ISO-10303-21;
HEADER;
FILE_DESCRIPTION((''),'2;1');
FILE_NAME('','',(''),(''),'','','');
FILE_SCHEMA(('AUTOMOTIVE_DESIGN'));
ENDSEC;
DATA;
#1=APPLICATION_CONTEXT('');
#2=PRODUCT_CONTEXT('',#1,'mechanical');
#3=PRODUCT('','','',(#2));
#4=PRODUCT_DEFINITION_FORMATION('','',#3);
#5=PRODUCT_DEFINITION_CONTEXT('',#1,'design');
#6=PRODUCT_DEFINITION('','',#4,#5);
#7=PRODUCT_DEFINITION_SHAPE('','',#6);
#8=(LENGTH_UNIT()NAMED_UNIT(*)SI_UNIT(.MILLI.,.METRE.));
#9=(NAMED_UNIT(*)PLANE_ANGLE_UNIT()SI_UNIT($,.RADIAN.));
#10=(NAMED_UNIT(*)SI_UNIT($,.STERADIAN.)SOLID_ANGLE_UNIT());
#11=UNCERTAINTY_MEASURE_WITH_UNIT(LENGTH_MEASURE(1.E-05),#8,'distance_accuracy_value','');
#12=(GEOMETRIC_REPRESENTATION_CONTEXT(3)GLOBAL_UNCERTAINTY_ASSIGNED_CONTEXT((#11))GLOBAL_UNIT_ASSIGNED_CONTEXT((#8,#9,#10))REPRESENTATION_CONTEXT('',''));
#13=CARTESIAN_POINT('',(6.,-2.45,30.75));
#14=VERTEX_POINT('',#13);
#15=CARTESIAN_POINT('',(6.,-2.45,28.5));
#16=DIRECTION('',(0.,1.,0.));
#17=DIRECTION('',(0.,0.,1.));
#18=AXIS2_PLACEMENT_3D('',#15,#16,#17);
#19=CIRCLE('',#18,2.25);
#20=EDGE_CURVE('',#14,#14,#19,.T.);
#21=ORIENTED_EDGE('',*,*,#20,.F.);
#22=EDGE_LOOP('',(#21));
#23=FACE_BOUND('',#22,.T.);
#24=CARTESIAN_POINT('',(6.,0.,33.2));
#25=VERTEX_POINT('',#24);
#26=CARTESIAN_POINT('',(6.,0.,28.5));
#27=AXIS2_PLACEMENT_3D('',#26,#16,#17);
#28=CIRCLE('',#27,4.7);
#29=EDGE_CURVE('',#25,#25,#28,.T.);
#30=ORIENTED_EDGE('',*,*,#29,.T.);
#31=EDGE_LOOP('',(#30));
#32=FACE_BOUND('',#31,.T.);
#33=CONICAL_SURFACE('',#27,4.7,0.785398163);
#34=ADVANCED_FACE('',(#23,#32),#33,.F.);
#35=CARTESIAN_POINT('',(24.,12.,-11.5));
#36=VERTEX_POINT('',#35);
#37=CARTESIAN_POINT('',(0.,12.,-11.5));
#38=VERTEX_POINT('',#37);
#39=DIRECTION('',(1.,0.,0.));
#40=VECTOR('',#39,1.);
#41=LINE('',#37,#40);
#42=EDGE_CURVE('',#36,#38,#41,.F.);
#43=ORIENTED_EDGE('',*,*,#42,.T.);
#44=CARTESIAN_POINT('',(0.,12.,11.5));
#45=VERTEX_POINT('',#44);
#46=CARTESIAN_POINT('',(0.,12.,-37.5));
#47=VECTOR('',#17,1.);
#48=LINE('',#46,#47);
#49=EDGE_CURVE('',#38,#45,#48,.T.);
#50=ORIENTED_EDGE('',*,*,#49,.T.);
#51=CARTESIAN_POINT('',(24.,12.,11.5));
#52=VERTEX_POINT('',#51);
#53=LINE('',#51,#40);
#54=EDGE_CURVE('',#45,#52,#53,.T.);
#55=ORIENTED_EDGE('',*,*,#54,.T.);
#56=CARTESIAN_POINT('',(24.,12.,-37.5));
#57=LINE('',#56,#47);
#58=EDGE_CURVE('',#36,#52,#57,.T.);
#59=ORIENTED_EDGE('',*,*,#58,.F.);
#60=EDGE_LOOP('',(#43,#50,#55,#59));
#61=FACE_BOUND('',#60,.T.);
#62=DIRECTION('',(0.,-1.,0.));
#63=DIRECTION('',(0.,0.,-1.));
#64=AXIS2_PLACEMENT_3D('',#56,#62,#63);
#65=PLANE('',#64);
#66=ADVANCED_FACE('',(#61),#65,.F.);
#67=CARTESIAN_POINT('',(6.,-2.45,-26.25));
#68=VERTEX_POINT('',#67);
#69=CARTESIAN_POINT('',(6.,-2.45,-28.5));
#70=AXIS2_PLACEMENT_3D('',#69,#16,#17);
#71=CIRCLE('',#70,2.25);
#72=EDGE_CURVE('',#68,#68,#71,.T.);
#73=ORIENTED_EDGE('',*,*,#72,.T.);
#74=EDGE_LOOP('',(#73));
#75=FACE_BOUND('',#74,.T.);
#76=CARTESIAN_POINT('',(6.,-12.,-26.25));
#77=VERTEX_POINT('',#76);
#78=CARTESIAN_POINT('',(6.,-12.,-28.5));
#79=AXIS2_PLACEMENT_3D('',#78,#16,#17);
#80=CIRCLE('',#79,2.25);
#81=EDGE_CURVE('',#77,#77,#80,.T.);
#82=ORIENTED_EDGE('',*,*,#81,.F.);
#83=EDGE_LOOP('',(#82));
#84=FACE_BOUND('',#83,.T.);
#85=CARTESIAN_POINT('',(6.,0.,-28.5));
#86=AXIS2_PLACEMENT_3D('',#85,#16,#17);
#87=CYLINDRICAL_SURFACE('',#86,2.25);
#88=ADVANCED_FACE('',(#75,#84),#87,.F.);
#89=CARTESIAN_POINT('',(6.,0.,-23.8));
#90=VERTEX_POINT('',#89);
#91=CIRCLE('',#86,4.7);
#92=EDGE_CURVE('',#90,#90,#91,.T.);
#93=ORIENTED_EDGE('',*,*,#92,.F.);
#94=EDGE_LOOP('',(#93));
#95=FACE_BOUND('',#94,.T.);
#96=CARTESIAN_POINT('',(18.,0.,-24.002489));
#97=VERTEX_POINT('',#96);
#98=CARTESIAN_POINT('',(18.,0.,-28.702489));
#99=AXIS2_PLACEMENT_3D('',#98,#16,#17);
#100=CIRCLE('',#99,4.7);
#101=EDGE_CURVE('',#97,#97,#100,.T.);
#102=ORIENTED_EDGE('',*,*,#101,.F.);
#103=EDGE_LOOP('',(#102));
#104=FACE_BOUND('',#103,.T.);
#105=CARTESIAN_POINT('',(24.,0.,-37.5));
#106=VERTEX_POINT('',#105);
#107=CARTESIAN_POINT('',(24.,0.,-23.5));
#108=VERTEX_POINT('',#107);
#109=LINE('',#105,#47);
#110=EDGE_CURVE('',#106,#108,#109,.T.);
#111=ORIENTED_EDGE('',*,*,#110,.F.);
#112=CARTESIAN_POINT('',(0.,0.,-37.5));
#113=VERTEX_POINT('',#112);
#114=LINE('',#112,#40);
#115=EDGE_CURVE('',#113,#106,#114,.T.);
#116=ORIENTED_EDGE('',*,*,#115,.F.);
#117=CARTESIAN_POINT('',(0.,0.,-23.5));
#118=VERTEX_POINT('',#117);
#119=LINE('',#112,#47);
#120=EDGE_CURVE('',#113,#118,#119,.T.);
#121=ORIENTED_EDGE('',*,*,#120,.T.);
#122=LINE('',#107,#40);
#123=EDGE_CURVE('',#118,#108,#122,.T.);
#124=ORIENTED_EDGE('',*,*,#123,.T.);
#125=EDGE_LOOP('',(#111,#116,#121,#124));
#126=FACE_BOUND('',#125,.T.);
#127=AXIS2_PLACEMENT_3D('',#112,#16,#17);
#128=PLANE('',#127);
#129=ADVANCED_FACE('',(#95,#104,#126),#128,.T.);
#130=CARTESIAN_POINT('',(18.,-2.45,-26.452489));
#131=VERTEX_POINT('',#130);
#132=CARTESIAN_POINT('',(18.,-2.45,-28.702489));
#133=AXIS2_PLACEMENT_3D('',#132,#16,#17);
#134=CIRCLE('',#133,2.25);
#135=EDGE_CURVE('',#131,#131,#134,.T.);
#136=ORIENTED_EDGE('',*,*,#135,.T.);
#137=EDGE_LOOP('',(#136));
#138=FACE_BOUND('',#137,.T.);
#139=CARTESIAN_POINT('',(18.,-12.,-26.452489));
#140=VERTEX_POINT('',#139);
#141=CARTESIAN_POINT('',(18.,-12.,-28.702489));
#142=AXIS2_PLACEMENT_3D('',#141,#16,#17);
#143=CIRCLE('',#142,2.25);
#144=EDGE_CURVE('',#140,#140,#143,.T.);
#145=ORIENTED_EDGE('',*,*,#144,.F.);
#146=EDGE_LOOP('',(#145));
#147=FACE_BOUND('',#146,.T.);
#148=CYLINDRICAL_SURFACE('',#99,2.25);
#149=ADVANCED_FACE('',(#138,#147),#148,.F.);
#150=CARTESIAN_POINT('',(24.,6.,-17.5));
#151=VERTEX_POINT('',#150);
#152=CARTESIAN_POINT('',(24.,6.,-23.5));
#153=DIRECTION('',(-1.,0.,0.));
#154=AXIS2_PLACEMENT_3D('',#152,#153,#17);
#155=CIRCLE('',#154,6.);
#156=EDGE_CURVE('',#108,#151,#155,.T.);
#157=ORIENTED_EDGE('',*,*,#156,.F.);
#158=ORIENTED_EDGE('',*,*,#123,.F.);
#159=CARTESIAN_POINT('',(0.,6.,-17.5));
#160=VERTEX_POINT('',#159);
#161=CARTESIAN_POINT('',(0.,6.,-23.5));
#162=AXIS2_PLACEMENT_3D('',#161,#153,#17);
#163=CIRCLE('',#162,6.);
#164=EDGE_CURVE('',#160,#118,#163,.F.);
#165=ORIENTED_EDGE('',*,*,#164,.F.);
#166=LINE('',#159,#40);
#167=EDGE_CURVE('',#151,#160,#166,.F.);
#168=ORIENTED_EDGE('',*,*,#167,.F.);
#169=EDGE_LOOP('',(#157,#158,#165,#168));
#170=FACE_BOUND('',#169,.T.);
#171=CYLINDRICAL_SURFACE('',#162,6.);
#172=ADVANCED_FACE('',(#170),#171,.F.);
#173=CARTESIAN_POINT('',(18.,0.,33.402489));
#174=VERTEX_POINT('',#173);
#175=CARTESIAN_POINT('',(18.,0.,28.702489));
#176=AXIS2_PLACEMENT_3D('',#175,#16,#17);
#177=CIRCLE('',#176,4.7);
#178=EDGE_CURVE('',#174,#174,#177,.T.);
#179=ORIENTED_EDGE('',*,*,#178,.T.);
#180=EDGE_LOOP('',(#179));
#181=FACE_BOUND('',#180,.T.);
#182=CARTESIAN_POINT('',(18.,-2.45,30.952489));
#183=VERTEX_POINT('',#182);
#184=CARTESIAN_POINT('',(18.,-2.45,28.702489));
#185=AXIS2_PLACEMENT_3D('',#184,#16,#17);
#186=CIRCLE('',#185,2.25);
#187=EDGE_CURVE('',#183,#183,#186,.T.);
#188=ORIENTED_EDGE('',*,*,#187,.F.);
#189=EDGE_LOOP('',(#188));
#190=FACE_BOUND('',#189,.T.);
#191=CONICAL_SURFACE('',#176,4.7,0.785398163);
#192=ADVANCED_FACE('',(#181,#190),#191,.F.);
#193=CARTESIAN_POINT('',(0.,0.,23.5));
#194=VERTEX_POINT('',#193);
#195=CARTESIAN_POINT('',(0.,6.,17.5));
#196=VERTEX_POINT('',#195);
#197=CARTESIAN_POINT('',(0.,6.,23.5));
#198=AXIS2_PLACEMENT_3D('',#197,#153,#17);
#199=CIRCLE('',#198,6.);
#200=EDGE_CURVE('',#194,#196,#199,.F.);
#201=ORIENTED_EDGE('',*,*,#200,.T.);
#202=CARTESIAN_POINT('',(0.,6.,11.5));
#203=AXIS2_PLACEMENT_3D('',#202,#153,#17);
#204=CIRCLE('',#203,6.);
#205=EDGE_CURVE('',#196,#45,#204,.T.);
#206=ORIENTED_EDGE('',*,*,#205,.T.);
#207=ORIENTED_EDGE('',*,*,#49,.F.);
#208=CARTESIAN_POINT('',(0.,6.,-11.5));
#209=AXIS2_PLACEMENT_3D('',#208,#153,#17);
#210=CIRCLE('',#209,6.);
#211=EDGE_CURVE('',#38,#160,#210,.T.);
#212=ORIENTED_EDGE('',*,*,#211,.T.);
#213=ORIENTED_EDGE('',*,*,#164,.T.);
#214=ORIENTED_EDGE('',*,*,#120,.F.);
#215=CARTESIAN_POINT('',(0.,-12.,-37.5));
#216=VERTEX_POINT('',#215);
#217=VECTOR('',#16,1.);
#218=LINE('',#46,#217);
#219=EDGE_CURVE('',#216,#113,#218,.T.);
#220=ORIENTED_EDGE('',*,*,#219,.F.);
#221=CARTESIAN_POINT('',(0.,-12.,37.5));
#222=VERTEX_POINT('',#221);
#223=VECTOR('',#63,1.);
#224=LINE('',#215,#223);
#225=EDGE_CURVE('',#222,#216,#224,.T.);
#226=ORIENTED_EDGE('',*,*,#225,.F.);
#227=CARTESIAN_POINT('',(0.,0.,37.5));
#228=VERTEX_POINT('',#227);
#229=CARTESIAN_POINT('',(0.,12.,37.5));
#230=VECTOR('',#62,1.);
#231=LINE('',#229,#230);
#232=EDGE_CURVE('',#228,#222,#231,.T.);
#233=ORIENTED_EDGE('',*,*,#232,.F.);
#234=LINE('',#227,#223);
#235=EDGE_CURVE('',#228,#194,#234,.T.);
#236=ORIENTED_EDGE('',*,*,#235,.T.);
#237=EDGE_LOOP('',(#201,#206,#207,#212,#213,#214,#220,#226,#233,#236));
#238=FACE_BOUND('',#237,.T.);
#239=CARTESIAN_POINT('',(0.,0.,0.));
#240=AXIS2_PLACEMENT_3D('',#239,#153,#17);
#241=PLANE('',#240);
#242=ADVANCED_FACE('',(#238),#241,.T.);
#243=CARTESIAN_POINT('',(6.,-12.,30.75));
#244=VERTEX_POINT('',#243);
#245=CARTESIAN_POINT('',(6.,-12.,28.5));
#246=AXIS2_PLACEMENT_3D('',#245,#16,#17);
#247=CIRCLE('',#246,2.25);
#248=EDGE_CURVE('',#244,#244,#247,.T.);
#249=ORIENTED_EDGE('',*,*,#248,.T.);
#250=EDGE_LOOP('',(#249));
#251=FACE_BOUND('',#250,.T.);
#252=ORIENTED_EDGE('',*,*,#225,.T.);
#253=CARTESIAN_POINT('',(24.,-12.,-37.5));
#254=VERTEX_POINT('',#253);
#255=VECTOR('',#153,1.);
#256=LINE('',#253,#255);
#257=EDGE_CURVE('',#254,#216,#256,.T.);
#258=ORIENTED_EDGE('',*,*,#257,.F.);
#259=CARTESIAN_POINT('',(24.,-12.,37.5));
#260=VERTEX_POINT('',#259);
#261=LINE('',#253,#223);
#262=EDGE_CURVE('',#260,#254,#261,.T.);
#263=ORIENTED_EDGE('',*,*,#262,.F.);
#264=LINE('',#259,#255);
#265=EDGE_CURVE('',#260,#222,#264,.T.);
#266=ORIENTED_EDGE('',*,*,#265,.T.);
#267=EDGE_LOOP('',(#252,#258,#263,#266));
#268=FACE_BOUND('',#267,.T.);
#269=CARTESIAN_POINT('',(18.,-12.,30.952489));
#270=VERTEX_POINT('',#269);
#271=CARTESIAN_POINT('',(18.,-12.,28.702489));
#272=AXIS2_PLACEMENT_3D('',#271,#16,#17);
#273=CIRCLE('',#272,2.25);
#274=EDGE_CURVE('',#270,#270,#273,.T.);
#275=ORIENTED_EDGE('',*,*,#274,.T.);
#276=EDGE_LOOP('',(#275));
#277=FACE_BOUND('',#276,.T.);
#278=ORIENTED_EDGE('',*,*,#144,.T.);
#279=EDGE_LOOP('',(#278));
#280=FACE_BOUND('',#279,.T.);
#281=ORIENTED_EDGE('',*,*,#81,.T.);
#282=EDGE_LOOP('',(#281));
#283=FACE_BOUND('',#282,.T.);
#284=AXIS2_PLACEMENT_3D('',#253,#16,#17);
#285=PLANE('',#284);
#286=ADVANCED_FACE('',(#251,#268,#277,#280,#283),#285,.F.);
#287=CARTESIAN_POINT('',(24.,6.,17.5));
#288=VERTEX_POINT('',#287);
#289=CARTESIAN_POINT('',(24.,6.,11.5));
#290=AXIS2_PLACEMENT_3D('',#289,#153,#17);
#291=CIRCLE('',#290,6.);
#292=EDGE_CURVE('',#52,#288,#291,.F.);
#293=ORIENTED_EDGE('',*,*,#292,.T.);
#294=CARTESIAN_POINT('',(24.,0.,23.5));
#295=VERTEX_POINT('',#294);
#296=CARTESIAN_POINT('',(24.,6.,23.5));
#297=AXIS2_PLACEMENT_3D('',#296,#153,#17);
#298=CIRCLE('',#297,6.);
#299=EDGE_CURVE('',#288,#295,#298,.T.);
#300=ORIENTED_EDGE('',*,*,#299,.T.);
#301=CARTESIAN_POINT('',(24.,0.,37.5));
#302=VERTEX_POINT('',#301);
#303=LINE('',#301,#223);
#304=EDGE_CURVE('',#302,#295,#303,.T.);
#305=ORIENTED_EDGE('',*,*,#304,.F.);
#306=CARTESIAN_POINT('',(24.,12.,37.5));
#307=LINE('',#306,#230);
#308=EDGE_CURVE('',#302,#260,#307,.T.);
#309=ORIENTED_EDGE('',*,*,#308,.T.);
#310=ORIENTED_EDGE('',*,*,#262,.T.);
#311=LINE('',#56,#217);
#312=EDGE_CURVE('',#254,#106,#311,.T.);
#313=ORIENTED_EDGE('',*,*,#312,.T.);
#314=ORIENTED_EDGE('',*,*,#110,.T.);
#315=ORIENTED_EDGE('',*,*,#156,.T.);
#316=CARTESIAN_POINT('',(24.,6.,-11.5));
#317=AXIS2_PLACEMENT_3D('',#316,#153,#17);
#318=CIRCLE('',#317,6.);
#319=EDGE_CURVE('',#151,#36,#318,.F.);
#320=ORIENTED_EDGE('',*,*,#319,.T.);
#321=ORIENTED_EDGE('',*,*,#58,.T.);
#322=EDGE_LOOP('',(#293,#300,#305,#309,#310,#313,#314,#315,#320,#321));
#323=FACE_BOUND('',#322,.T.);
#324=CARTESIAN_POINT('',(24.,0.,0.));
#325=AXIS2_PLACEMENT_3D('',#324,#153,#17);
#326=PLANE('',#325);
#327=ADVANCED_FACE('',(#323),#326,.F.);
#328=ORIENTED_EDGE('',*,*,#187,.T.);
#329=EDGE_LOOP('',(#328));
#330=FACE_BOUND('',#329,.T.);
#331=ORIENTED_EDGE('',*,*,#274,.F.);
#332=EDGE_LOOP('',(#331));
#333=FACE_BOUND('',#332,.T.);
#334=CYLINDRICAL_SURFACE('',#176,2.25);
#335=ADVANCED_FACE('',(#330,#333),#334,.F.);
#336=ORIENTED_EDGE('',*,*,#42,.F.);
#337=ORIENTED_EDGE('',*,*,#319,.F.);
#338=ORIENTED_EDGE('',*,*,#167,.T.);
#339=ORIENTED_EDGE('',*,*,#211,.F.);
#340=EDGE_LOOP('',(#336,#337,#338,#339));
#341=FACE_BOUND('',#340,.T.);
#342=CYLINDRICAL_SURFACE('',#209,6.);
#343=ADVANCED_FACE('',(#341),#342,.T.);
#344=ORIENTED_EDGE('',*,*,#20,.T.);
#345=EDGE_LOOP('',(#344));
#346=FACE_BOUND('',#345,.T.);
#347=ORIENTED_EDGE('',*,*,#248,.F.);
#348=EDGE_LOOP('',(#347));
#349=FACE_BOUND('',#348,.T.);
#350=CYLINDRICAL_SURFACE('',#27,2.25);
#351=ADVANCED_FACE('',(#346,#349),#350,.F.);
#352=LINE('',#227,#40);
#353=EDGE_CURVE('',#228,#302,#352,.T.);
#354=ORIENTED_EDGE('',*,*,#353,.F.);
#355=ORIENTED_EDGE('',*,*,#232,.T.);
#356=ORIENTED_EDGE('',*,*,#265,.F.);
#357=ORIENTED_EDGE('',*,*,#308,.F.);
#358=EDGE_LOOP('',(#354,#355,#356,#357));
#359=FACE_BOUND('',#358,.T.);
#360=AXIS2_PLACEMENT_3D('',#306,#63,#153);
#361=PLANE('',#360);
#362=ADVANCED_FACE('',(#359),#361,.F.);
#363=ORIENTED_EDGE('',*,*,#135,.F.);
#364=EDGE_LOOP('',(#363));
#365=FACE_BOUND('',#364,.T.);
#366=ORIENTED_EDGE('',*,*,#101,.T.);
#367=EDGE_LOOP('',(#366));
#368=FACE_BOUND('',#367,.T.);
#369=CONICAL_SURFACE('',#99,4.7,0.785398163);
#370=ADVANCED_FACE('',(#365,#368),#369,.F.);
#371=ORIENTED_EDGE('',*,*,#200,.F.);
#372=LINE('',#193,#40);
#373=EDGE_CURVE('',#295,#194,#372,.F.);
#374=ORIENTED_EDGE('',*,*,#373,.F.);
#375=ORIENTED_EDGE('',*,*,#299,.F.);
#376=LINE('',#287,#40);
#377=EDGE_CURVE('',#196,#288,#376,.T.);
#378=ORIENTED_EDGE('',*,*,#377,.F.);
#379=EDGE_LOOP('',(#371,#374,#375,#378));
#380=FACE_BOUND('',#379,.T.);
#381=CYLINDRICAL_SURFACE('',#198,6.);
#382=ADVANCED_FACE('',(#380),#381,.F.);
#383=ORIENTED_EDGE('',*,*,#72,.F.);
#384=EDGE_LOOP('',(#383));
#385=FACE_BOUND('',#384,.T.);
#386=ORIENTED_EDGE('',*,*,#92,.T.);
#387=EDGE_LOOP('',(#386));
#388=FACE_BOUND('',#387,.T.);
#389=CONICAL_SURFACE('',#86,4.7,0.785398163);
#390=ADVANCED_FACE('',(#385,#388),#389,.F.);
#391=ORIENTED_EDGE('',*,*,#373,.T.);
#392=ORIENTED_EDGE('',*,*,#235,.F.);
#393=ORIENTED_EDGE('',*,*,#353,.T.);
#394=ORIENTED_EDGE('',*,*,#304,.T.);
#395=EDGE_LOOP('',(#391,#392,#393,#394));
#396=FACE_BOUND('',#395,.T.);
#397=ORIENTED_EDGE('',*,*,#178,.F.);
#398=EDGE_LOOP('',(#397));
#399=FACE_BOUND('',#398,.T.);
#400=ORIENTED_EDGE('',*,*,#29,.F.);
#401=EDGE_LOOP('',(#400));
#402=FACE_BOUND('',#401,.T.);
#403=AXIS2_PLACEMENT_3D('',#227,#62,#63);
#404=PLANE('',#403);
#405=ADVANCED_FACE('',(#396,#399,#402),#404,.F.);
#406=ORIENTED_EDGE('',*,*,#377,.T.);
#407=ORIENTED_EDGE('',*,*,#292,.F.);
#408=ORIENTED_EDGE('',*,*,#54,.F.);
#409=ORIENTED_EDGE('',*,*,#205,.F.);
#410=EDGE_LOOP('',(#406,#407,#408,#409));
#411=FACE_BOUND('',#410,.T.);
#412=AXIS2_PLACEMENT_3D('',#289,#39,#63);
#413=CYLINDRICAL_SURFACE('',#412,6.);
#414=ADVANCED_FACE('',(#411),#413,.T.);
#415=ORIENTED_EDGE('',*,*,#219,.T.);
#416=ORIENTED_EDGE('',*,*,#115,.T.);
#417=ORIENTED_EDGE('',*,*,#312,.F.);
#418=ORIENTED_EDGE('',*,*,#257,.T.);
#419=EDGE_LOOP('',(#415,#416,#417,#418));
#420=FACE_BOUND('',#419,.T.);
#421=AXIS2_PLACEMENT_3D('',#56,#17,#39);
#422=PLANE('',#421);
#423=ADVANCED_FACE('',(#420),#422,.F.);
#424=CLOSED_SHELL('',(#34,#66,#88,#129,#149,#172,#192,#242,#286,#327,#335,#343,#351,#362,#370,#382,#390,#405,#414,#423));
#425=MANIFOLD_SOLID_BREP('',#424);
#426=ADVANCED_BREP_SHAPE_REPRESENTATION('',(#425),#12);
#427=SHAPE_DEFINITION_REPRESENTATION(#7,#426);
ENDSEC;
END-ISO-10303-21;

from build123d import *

# Parameters (mm, degrees)
SKETCH1_W                                       = 75
SKETCH1_H                                       = 24
BOSS_EXTRUDE1_DEPTH                             = 24
SKETCH2_W                                       = 20
SKETCH2_H                                       = 12
CUT_EXTRUDE1_DEPTH                              = 24
FILLET1_START                                   = -1
FILLET1_DEPTH                                   = 26
FILLET1_2_DEPTH                                 = 24
CSK_FOR_M4_FLAT_HEAD_MACHINE_SCREW1_D           = 4.5
CSK_FOR_M4_FLAT_HEAD_MACHINE_SCREW1_CSINK_D     = 9.4
CSK_FOR_M4_FLAT_HEAD_MACHINE_SCREW1_CSINK_ANGLE = 90


with BuildPart() as part:
    # Sketch1 → Boss-Extrude1 (new body)
    with BuildSketch(Plane(origin=(0, 0, 0), x_dir=(0, 0, -1), z_dir=(1, 0, 0))):
        Rectangle(SKETCH1_W, SKETCH1_H)
    extrude(amount=BOSS_EXTRUDE1_DEPTH)

    # Sketch2 → Cut-Extrude1 (cut)
    with BuildSketch(Plane(origin=(24, 0, 0), x_dir=(0, 0, -1), z_dir=(1, 0, 0))):
        with Locations((-27.5, 6)):
            Rectangle(SKETCH2_W, SKETCH2_H)
    cut_extrude1 = extrude(amount=-CUT_EXTRUDE1_DEPTH, mode=Mode.SUBTRACT)

    # Fillet1: read off the stored shape, not the designer's step
    # Fillet1 outline → Fillet1 (cut)
    with BuildSketch(Plane.YZ.offset(FILLET1_START)):
        with BuildLine():
            Line((12, 17.5), (6, 17.5))
            ThreePointArc((6, 17.5), (10.242640687, 15.742640687), (12, 11.5))
            Line((12, 11.5), (12, 17.5))
        make_face()
    fillet1 = extrude(amount=FILLET1_DEPTH, mode=Mode.SUBTRACT)

    # Fillet1 2 outline → Fillet1 2 (add)
    with BuildSketch(Plane.YZ):
        with BuildLine():
            Line((0, 17.5), (6, 17.5))
            ThreePointArc((6, 17.5), (1.757359313, 19.257359313), (0, 23.5))
            Line((0, 23.5), (0, 17.5))
        make_face()
    fillet1_2 = extrude(amount=FILLET1_2_DEPTH)

    # CSK for M4 Flat Head Machine Screw1 (through all)
    with Locations(Plane(origin=(0, 0, 0), x_dir=(1, 0, 0), z_dir=(0, 1, 0))):
        with Locations((6, -28.5), (18, -28.702489343)):
            csk_for_m4_flat_head_machine_screw1 = CounterSinkHole(CSK_FOR_M4_FLAT_HEAD_MACHINE_SCREW1_D / 2, CSK_FOR_M4_FLAT_HEAD_MACHINE_SCREW1_CSINK_D / 2, counter_sink_angle=CSK_FOR_M4_FLAT_HEAD_MACHINE_SCREW1_CSINK_ANGLE)

    # Mirror1: Cut-Extrude1, Fillet1, Fillet1 2, CSK for M4 Flat Head Machine Screw1 across plane
    add(cut_extrude1.mirror(Plane.XY), mode=Mode.SUBTRACT)
    add(fillet1.mirror(Plane.XY), mode=Mode.SUBTRACT)
    add(fillet1_2.mirror(Plane.XY))
    add(csk_for_m4_flat_head_machine_screw1.mirror(Plane.XY), mode=Mode.SUBTRACT)


solid = part.part
